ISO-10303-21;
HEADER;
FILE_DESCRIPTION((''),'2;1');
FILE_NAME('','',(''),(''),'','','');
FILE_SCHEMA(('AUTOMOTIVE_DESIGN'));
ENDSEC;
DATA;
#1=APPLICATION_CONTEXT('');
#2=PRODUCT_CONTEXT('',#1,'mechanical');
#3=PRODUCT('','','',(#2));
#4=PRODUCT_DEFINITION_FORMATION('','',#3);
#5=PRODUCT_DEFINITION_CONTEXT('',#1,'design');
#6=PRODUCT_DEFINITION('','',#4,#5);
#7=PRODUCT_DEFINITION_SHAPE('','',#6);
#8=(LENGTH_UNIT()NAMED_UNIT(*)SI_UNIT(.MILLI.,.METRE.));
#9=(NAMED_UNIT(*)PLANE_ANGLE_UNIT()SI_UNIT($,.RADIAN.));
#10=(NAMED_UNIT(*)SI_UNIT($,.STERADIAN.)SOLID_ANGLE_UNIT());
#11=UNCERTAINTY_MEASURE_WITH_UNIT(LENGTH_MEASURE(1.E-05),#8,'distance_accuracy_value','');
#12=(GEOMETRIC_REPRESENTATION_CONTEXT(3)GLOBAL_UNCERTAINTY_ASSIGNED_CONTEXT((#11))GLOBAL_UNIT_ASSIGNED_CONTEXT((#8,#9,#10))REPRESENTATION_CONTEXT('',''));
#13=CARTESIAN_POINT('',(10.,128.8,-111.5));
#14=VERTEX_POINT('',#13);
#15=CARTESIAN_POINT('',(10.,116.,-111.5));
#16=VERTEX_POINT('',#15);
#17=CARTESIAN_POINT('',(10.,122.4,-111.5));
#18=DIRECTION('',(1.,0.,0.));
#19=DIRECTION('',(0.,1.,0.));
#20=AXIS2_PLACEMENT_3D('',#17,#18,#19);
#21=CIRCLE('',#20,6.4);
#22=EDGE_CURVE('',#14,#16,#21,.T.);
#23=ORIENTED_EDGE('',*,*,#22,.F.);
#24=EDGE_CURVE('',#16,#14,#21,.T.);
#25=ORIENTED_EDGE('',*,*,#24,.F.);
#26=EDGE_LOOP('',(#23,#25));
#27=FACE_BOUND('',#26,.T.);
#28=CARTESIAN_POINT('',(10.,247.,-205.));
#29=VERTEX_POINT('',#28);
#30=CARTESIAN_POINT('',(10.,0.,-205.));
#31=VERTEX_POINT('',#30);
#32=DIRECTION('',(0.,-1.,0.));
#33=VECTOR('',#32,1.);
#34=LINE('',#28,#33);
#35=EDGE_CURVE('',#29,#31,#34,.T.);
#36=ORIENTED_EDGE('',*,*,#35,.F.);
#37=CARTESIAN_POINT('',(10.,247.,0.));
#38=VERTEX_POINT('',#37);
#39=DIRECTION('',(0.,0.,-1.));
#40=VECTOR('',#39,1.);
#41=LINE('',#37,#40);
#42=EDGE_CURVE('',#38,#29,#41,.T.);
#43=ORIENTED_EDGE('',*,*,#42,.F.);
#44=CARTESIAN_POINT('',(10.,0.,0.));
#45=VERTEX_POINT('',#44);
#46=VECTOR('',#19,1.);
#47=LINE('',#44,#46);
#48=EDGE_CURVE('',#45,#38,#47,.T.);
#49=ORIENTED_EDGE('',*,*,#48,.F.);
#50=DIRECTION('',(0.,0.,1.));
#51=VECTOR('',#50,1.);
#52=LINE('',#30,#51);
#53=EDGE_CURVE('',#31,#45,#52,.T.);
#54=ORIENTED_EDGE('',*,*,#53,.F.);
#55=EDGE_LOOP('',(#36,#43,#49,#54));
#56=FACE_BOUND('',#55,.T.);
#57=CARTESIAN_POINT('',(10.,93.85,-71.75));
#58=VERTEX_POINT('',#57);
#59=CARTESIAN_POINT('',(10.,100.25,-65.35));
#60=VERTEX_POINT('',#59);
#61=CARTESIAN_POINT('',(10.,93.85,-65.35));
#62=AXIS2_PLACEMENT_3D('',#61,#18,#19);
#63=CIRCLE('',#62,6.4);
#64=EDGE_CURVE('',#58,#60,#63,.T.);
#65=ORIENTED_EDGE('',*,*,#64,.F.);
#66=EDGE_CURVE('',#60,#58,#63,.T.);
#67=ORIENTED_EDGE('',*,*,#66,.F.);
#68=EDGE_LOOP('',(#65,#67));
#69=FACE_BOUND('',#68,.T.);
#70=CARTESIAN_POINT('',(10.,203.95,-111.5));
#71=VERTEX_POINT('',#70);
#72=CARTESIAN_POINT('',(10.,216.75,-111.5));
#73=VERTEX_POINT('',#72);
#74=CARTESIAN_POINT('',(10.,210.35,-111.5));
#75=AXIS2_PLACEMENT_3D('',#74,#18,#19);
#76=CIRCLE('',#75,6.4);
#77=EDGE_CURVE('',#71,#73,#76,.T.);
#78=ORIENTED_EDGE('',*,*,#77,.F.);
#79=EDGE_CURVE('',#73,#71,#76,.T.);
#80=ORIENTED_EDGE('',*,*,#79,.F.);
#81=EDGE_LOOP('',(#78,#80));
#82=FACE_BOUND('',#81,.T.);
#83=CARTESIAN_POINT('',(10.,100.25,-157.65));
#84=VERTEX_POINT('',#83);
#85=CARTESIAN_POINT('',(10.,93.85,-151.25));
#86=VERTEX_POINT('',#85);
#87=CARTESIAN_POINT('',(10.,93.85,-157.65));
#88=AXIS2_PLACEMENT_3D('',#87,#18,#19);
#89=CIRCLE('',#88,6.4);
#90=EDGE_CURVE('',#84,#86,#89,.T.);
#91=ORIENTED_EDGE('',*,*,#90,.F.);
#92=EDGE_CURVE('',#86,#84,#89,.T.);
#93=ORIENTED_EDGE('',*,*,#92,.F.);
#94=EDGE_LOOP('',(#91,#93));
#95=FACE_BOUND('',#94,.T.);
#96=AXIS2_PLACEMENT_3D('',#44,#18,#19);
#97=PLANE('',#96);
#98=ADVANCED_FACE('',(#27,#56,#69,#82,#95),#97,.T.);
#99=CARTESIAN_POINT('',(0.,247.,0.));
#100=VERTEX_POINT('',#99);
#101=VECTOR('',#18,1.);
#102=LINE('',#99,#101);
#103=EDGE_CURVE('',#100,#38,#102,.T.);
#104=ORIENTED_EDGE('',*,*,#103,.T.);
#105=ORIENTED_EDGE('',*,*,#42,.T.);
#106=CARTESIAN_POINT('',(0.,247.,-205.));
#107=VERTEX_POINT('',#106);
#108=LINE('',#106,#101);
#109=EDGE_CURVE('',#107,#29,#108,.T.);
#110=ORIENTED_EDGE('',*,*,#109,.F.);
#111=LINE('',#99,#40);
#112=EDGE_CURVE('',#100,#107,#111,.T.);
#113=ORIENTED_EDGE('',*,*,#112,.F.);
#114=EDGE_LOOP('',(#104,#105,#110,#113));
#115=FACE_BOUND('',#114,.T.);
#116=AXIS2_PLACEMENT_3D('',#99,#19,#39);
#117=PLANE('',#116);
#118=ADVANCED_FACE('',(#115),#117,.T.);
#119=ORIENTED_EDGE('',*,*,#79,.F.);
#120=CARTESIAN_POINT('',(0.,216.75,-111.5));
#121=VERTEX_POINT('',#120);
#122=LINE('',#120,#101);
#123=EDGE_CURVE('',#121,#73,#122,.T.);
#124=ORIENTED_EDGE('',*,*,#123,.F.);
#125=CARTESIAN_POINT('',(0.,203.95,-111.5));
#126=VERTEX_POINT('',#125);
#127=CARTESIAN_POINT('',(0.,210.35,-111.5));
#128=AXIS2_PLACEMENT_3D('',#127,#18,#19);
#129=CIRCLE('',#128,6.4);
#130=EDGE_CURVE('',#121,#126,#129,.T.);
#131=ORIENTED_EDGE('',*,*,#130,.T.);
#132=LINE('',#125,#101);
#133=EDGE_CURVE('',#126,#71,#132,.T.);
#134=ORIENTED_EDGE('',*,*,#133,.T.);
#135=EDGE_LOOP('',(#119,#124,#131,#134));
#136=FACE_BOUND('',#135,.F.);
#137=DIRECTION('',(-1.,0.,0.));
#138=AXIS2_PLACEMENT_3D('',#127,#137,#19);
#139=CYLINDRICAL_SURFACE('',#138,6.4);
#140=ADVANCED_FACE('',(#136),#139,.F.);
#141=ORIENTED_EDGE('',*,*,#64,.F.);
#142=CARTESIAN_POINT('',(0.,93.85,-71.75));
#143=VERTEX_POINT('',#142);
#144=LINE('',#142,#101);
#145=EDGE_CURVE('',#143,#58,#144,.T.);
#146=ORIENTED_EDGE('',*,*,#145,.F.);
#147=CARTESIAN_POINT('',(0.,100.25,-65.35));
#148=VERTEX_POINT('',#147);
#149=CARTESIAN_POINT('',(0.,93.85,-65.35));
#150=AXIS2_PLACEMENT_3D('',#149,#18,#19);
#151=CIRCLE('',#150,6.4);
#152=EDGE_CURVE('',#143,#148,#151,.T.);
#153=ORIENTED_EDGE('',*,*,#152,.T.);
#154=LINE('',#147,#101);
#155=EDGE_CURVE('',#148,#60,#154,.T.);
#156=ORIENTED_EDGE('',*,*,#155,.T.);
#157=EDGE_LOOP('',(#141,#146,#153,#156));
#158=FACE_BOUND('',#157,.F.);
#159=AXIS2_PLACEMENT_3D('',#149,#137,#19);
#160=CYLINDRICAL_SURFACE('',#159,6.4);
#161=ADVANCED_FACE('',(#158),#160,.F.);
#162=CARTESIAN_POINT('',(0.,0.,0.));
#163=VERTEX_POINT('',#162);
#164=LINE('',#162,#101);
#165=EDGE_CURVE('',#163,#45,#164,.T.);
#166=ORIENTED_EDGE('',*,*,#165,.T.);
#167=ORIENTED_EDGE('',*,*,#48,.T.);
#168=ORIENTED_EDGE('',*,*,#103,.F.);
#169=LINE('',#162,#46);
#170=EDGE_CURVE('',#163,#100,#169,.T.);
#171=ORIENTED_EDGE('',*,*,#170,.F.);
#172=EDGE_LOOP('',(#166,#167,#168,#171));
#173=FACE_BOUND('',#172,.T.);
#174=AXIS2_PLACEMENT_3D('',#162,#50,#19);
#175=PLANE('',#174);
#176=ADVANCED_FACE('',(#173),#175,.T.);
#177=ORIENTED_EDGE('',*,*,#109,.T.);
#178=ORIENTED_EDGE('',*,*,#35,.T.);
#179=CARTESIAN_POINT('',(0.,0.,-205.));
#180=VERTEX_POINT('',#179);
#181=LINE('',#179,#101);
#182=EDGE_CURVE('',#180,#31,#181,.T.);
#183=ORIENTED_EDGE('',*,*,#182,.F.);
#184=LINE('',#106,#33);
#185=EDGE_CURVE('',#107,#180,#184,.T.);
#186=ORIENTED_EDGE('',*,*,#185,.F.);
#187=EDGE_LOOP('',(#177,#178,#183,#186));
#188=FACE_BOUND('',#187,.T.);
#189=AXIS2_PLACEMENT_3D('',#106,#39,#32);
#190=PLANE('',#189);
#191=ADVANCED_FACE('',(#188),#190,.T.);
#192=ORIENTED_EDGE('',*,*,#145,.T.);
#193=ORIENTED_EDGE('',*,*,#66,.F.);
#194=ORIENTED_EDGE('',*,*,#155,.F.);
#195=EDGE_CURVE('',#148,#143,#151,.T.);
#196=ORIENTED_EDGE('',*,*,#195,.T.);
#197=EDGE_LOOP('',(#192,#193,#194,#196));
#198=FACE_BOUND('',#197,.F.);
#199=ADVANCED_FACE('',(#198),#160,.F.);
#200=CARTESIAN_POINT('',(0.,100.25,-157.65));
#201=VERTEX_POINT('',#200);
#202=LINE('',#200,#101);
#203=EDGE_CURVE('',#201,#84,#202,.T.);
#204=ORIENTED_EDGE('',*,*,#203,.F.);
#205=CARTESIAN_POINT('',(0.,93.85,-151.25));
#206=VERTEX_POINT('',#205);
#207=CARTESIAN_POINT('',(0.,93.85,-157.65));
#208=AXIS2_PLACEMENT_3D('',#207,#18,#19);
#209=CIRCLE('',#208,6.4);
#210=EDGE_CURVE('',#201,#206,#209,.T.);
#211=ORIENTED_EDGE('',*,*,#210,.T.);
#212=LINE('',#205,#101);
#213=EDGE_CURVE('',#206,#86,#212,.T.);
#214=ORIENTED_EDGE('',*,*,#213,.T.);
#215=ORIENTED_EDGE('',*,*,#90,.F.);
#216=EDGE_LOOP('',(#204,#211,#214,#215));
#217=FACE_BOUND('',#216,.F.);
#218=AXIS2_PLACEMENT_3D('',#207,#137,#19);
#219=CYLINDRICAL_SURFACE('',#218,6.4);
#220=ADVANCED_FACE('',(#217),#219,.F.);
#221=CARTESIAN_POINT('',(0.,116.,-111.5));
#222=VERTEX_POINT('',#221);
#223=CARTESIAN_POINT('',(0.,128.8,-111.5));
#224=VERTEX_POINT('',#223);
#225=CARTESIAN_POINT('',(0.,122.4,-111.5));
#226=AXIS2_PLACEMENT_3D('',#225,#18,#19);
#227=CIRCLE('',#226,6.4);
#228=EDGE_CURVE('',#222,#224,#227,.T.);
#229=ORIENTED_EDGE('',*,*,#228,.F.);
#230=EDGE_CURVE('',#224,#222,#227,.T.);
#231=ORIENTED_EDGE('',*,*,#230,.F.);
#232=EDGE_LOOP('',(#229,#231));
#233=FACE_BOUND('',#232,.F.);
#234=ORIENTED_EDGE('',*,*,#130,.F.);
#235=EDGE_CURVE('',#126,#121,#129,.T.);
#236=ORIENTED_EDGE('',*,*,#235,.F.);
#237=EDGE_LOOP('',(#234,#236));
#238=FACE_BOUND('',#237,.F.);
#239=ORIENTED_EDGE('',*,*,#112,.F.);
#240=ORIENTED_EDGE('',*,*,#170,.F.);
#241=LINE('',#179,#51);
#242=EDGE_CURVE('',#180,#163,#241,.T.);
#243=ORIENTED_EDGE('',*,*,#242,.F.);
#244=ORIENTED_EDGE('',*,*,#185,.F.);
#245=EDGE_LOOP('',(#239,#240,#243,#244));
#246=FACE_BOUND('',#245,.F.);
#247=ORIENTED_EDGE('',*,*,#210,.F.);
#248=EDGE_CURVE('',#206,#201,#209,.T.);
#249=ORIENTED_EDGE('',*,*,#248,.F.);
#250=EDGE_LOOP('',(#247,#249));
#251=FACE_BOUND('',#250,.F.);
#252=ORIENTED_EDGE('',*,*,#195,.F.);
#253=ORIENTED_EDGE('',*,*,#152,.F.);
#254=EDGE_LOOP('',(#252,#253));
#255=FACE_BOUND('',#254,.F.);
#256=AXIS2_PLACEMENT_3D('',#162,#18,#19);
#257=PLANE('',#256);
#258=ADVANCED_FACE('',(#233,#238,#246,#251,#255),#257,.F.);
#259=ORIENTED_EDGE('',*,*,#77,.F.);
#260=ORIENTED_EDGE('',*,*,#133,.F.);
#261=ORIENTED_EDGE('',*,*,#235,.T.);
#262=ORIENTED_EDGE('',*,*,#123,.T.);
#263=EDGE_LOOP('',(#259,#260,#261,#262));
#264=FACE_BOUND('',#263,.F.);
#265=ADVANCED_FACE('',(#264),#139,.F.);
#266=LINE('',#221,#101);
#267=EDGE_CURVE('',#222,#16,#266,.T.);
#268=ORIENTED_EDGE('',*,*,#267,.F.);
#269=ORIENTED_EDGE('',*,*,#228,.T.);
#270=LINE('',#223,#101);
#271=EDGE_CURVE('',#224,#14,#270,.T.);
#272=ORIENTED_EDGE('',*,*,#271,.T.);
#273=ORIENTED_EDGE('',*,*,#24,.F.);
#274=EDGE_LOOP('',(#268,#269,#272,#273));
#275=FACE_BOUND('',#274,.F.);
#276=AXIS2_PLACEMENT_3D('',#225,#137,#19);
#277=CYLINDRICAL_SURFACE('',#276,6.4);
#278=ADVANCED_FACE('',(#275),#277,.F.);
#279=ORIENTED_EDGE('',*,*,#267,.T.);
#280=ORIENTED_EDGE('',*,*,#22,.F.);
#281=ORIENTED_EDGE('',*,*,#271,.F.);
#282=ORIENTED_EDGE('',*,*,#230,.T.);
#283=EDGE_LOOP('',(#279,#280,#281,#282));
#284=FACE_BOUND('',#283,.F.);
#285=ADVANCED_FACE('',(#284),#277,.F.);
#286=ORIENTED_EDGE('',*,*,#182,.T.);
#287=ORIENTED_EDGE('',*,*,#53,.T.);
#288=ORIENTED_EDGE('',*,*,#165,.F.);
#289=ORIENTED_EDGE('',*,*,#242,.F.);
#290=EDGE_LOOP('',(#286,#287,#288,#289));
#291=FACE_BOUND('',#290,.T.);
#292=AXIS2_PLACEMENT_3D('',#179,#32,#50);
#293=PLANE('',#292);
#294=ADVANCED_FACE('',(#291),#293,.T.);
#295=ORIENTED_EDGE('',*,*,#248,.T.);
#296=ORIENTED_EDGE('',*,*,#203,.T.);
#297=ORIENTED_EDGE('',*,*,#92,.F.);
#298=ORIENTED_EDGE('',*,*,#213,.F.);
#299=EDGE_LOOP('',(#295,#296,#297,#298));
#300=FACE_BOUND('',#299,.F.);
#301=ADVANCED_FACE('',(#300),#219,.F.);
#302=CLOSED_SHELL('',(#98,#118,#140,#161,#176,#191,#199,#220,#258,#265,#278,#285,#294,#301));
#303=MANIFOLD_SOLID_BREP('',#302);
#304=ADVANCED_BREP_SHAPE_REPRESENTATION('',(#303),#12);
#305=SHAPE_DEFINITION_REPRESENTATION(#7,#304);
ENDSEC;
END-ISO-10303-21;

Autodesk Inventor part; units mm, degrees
ref_plane "YZ Plane" through (0, 0, 0) normal (1, 0, 0) x (0, 1, 0)
ref_plane "XZ Plane" through (0, 0, 0) normal (0, 1, 0) x (-1, 0, 0)
ref_plane "XY Plane" through (0, 0, 0) normal (0, 0, 1) x (1, 0, 0)
sketch "Sketch1" plane through (0, 0, 0) normal (1, 0, 0) x (0, 1, 0)
  line L0 (0, 0) -> (247, 0)
  line L1 (247, 0) -> (247, -205)
  line L2 (247, -205) -> (0, -205)
  line L3 (0, -205) -> (0, 0)
  circle A0 centre (93.85, -65.35) radius 6.4
  circle A1 centre (93.85, -157.65) radius 6.4
  line L4 (93.85, -65.35) -> (93.85, -157.65)
  circle A2 centre (122.4, -111.5) radius 6.4
  line L5 (122.4, -111.5) -> (116, -111.5)
  line L6 (116, -111.5) -> (210.35, -111.5)
  circle A3 centre (210.35, -111.5) radius 6.4
  point P0 (122.35, 111.5)
  dimension "d5" = 12.8
  dimension "d0" = 247
  dimension "d1" = 205
  dimension "d3" = 12.8
  dimension "d4" = 92.3
  dimension "d6" = 94.35
  dimension "d7" = 12.8
  dimension "d10" = 12.8
extrude "Extrusion1" add sketch "Sketch1" along normal blind 10
properties part number "bigwall"
